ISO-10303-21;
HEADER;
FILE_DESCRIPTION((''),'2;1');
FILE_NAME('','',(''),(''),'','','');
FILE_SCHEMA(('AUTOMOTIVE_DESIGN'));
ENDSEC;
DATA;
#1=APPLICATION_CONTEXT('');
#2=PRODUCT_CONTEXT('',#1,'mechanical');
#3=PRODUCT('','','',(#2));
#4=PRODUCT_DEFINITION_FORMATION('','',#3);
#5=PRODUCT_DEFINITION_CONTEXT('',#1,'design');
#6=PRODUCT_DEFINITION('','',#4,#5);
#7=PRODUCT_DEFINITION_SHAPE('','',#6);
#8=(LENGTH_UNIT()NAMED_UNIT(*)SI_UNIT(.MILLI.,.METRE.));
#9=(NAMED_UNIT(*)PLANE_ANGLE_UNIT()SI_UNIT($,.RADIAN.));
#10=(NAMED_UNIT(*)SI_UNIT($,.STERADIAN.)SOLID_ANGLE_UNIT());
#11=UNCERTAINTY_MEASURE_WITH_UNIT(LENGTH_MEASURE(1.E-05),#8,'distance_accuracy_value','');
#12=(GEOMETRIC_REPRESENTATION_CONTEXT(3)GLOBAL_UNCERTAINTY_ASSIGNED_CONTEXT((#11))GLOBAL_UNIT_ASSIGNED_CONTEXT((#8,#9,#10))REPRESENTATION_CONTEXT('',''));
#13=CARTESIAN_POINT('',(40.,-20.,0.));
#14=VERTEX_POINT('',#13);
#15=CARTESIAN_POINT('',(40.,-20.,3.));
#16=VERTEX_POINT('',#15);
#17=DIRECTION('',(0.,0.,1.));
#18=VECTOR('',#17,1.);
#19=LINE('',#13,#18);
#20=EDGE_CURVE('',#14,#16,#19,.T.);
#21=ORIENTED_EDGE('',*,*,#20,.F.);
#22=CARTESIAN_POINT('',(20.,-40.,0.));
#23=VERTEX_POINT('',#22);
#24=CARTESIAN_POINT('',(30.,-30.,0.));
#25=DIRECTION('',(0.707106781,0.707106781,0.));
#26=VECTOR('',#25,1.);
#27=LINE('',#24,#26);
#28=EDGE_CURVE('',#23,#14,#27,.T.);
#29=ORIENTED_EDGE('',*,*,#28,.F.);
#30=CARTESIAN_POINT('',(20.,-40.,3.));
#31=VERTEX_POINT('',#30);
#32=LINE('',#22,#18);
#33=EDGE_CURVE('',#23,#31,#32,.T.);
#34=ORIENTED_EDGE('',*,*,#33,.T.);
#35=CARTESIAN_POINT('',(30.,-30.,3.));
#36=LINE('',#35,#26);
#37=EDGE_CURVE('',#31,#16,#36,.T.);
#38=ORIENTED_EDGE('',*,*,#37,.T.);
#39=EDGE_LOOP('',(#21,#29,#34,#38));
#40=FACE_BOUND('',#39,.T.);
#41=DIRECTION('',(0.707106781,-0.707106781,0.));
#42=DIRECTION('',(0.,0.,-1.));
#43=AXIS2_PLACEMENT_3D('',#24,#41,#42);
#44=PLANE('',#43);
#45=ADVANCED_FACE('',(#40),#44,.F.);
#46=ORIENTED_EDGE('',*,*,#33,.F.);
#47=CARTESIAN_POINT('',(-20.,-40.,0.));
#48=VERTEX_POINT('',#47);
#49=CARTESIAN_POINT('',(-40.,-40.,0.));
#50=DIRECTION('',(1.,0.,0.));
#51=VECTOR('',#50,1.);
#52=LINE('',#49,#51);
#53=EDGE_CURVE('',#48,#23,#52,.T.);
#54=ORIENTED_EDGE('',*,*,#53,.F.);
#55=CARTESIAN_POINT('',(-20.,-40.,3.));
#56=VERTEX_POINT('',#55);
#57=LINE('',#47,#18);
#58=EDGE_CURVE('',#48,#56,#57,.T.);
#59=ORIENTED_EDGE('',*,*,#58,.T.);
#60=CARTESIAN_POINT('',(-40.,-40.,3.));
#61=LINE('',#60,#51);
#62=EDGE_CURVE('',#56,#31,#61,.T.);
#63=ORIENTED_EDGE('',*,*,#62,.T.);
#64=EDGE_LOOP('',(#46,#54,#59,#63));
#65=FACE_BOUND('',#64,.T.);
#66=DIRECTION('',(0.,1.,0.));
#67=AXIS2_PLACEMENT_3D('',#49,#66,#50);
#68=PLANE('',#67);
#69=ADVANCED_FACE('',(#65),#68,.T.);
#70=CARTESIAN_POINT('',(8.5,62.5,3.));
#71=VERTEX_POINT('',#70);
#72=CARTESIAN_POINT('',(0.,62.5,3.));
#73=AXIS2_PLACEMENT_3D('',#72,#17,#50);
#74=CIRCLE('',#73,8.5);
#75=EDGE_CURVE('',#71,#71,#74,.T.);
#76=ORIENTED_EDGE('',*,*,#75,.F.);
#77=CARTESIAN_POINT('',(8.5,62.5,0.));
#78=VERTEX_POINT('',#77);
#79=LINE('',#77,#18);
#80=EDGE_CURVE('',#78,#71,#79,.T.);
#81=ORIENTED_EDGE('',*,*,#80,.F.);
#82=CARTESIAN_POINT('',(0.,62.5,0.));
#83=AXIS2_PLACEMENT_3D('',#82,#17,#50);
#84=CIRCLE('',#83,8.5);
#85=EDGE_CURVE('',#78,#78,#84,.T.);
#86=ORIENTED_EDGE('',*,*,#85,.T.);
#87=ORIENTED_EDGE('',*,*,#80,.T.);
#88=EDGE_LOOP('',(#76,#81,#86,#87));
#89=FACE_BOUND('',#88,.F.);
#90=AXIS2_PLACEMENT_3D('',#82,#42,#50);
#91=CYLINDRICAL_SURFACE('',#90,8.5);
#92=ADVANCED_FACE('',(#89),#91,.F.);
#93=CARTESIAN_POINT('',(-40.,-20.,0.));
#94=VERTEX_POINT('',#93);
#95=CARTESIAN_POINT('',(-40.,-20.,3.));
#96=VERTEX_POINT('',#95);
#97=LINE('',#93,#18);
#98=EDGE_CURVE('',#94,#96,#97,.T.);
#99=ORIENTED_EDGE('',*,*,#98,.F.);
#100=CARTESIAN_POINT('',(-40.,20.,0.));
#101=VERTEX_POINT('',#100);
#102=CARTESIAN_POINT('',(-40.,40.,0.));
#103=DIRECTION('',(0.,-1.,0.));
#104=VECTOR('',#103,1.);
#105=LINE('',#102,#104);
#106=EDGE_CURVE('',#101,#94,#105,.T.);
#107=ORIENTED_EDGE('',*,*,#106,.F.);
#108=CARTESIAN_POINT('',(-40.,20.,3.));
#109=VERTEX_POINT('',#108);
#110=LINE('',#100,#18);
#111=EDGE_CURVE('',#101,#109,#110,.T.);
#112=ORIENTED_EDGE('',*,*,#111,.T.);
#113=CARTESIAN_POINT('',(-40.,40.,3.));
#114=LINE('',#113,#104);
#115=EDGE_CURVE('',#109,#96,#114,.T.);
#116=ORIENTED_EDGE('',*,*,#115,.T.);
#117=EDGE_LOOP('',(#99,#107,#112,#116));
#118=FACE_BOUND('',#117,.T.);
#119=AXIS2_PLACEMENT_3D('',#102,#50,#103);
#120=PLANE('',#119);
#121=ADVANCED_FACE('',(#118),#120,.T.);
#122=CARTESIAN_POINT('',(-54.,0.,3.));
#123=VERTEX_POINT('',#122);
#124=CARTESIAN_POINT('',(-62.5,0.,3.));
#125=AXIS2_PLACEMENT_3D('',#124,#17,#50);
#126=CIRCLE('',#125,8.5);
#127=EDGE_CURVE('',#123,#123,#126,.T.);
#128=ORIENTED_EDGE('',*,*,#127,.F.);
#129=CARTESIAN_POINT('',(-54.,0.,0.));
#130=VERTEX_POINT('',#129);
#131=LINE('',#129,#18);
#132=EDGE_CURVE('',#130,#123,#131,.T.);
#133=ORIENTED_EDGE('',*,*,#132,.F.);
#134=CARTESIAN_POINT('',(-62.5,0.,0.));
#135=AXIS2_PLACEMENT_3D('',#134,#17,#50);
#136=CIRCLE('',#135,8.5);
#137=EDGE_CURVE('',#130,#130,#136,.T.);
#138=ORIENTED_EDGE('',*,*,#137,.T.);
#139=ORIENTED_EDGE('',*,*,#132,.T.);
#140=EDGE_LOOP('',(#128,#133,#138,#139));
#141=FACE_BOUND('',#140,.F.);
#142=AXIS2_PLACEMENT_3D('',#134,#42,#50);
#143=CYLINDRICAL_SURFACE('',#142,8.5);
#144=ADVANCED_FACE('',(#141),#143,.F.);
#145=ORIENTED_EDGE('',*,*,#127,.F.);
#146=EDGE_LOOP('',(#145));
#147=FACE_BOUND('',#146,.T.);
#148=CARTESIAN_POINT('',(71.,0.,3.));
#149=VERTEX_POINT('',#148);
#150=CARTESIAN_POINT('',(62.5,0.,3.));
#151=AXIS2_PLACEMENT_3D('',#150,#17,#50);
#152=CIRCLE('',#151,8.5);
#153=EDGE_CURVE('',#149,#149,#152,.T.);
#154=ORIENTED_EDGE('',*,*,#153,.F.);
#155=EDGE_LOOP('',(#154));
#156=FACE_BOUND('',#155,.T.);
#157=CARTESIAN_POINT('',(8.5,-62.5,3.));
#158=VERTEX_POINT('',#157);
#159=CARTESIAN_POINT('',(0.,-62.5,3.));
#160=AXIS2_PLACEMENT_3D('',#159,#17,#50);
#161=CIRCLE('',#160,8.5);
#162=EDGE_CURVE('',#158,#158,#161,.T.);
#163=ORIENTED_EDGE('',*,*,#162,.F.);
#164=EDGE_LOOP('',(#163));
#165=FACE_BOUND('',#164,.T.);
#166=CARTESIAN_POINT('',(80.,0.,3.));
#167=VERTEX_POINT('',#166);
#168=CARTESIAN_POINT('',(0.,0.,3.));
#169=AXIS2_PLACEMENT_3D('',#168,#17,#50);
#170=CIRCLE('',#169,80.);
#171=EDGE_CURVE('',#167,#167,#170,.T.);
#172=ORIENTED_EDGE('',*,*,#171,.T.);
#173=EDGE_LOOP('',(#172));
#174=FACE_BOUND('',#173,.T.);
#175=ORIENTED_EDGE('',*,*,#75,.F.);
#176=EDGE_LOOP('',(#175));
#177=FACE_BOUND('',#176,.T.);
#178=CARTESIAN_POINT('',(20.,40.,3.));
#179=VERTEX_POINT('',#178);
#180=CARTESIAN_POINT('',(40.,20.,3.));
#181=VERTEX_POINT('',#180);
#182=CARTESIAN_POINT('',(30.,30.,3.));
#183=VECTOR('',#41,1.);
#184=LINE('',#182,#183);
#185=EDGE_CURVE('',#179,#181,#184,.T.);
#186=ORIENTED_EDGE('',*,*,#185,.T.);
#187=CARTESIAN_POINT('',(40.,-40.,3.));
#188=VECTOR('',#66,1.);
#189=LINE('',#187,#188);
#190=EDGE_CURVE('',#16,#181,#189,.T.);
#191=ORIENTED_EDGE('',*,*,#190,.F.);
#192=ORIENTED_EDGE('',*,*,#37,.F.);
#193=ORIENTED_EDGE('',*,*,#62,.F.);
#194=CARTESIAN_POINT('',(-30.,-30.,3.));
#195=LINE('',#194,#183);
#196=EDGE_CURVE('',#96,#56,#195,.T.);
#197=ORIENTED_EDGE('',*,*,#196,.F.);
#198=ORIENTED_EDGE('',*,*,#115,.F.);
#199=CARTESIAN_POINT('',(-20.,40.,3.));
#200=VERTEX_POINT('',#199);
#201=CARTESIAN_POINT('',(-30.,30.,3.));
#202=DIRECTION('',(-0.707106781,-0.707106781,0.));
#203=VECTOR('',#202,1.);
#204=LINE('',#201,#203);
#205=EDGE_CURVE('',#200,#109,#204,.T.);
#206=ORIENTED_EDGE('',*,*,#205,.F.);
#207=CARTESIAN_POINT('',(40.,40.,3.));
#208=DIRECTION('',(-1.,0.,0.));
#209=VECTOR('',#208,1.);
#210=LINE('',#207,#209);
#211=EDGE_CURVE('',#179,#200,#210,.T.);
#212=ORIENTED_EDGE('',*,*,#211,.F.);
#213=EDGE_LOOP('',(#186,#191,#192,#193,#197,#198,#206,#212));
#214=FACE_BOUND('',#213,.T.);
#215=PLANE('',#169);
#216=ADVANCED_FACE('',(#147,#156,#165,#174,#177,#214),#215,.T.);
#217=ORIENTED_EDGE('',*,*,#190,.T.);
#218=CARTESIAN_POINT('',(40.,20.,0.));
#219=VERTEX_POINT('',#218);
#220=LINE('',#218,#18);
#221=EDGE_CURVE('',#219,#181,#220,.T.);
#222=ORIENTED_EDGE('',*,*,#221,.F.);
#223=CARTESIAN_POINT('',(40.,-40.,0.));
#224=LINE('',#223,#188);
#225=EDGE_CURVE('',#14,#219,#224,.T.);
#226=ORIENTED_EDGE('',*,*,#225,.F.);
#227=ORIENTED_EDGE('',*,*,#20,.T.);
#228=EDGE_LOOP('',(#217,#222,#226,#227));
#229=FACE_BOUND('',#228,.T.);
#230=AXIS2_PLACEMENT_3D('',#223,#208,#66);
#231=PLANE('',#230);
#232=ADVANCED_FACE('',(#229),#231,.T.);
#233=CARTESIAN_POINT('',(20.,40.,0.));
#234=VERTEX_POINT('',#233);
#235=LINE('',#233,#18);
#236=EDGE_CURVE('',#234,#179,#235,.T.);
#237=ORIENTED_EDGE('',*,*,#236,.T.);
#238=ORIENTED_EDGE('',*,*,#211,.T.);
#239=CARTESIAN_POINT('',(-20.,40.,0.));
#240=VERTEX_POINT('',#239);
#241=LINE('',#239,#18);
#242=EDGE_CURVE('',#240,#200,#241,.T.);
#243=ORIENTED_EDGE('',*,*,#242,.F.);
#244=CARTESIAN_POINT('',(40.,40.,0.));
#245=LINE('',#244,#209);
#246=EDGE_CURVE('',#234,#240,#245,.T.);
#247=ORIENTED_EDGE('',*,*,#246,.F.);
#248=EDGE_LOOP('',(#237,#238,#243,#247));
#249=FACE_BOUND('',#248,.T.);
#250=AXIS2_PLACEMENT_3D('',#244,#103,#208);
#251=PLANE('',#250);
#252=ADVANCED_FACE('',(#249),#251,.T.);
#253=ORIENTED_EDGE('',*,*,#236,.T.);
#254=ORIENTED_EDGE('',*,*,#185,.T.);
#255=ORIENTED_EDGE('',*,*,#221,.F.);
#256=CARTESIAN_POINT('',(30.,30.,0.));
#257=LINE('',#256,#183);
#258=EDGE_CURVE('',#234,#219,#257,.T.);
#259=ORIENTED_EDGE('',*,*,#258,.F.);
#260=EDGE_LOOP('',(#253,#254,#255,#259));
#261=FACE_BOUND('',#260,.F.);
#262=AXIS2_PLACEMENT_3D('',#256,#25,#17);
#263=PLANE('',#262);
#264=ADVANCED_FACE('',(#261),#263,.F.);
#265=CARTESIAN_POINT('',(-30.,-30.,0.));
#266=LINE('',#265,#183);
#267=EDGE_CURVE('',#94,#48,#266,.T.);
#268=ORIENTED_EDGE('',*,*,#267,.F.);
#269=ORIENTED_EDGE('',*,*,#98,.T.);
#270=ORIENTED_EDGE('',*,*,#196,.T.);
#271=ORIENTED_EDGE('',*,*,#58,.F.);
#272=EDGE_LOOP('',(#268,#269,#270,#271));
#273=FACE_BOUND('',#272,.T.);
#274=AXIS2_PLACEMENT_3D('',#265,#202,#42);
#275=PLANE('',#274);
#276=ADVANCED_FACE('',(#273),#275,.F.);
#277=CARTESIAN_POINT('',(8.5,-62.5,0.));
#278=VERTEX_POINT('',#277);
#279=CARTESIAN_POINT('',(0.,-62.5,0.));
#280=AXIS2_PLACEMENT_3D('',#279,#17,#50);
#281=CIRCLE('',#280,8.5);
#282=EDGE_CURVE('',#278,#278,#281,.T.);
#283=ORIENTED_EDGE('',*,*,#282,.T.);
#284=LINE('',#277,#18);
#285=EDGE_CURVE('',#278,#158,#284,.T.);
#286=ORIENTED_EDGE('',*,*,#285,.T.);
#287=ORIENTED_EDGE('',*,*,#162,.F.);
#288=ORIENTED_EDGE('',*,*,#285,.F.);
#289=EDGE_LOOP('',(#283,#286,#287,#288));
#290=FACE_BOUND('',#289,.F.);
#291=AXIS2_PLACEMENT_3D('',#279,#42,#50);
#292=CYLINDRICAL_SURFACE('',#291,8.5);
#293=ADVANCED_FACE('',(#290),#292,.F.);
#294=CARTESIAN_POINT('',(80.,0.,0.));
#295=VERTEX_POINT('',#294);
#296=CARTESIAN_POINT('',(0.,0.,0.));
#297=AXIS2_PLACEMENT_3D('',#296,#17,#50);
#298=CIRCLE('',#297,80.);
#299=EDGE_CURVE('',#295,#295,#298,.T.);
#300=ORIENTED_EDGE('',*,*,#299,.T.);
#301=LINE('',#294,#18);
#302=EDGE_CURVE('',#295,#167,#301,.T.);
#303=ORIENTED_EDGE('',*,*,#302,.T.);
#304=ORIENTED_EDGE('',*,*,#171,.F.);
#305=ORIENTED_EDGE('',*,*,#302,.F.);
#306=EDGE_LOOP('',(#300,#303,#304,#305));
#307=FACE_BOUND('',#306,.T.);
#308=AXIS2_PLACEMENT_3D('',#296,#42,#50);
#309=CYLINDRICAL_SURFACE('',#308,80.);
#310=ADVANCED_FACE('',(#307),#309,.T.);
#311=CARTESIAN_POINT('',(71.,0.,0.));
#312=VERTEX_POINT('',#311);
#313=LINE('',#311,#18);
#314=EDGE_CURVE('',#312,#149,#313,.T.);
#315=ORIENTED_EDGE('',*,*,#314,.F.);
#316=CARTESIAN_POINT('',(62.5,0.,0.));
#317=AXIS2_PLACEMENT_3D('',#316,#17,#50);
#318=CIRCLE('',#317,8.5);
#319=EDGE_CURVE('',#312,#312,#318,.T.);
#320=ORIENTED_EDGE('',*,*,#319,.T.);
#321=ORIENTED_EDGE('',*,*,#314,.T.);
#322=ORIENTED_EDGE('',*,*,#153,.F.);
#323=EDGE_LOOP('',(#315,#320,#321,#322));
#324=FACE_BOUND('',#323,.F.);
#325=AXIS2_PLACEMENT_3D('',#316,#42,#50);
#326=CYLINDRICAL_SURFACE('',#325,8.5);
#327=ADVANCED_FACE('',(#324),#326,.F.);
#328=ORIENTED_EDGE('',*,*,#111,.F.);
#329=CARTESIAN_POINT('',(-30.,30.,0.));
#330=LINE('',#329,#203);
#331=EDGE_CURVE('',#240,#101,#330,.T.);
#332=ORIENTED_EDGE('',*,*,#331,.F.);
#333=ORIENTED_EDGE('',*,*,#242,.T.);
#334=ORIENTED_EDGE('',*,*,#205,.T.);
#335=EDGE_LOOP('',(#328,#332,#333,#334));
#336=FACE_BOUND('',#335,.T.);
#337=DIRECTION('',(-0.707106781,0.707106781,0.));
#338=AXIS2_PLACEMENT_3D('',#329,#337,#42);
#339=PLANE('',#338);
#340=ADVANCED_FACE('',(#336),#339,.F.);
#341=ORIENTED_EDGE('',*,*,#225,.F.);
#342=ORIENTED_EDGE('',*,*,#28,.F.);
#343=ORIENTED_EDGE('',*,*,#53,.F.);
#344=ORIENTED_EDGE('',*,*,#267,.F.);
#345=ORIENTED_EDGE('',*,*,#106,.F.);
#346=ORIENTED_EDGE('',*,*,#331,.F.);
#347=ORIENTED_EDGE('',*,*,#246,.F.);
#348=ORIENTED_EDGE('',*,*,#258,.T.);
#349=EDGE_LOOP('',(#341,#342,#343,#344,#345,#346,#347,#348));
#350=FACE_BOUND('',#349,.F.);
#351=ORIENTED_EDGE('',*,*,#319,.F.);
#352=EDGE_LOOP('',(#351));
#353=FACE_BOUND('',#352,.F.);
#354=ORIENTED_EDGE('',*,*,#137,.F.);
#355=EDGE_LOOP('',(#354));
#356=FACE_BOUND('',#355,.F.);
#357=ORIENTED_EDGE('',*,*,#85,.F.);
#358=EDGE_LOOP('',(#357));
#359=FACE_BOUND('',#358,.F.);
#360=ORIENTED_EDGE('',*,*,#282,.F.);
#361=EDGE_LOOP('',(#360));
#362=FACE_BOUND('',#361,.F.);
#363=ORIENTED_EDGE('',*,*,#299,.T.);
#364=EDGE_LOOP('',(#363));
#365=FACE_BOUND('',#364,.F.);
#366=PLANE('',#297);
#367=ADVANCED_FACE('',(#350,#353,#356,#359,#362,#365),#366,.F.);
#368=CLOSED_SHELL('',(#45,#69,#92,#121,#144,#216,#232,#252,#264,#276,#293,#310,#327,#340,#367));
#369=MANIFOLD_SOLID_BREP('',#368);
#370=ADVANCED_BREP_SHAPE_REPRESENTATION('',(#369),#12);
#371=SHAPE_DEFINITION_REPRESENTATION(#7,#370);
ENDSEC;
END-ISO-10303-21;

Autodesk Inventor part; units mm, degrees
ref_plane "YZ Plane" through (0, 0, 0) normal (1, 0, 0) x (0, 1, 0)
ref_plane "XZ Plane" through (0, 0, 0) normal (0, 1, 0) x (-1, 0, 0)
ref_plane "XY Plane" through (0, 0, 0) normal (0, 0, 1) x (1, 0, 0)
sketch "Sketch1" plane through (0, 0, 0) normal (0, 0, 1) x (1, 0, 0)
  circle A0 centre (0, 0) radius 80
  line L0 (40, 40) -> (-40, 40)
  line L1 (-40, 40) -> (-40, -40)
  line L2 (-40, -40) -> (40, -40)
  line L3 (40, -40) -> (40, 40)
  line L4 (40, 40) -> (-40, -40) construction
  line L5 (-40, 40) -> (40, -40) construction
  circle A1 centre (-62.5, 0) radius 8.5
  circle A2 centre (0, 0) radius 62.5 construction
  circle A3 centre (0, -62.5) radius 8.5
  circle A4 centre (62.5, 0) radius 8.5
  circle A5 centre (0, 62.5) radius 8.5
  dimension "d171" = 125
  dimension "d157" = 160
  dimension "d158" = 80
  dimension "d159" = 80
  dimension "d170" = 17
  dimension "d174" = 360
extrude "Plate5" add sketch "Sketch1" along normal blind 3
chamfer "Corner Chamfer2" distance 20 angle 45 4 edges at (-40, -40, 1.5) (40, -40, 1.5) (-40, 40, 1.5) (40, 40, 1.5)
properties part number "PRS 940-59 FDS MAIN FLANGE" material "Stainless Steel"
